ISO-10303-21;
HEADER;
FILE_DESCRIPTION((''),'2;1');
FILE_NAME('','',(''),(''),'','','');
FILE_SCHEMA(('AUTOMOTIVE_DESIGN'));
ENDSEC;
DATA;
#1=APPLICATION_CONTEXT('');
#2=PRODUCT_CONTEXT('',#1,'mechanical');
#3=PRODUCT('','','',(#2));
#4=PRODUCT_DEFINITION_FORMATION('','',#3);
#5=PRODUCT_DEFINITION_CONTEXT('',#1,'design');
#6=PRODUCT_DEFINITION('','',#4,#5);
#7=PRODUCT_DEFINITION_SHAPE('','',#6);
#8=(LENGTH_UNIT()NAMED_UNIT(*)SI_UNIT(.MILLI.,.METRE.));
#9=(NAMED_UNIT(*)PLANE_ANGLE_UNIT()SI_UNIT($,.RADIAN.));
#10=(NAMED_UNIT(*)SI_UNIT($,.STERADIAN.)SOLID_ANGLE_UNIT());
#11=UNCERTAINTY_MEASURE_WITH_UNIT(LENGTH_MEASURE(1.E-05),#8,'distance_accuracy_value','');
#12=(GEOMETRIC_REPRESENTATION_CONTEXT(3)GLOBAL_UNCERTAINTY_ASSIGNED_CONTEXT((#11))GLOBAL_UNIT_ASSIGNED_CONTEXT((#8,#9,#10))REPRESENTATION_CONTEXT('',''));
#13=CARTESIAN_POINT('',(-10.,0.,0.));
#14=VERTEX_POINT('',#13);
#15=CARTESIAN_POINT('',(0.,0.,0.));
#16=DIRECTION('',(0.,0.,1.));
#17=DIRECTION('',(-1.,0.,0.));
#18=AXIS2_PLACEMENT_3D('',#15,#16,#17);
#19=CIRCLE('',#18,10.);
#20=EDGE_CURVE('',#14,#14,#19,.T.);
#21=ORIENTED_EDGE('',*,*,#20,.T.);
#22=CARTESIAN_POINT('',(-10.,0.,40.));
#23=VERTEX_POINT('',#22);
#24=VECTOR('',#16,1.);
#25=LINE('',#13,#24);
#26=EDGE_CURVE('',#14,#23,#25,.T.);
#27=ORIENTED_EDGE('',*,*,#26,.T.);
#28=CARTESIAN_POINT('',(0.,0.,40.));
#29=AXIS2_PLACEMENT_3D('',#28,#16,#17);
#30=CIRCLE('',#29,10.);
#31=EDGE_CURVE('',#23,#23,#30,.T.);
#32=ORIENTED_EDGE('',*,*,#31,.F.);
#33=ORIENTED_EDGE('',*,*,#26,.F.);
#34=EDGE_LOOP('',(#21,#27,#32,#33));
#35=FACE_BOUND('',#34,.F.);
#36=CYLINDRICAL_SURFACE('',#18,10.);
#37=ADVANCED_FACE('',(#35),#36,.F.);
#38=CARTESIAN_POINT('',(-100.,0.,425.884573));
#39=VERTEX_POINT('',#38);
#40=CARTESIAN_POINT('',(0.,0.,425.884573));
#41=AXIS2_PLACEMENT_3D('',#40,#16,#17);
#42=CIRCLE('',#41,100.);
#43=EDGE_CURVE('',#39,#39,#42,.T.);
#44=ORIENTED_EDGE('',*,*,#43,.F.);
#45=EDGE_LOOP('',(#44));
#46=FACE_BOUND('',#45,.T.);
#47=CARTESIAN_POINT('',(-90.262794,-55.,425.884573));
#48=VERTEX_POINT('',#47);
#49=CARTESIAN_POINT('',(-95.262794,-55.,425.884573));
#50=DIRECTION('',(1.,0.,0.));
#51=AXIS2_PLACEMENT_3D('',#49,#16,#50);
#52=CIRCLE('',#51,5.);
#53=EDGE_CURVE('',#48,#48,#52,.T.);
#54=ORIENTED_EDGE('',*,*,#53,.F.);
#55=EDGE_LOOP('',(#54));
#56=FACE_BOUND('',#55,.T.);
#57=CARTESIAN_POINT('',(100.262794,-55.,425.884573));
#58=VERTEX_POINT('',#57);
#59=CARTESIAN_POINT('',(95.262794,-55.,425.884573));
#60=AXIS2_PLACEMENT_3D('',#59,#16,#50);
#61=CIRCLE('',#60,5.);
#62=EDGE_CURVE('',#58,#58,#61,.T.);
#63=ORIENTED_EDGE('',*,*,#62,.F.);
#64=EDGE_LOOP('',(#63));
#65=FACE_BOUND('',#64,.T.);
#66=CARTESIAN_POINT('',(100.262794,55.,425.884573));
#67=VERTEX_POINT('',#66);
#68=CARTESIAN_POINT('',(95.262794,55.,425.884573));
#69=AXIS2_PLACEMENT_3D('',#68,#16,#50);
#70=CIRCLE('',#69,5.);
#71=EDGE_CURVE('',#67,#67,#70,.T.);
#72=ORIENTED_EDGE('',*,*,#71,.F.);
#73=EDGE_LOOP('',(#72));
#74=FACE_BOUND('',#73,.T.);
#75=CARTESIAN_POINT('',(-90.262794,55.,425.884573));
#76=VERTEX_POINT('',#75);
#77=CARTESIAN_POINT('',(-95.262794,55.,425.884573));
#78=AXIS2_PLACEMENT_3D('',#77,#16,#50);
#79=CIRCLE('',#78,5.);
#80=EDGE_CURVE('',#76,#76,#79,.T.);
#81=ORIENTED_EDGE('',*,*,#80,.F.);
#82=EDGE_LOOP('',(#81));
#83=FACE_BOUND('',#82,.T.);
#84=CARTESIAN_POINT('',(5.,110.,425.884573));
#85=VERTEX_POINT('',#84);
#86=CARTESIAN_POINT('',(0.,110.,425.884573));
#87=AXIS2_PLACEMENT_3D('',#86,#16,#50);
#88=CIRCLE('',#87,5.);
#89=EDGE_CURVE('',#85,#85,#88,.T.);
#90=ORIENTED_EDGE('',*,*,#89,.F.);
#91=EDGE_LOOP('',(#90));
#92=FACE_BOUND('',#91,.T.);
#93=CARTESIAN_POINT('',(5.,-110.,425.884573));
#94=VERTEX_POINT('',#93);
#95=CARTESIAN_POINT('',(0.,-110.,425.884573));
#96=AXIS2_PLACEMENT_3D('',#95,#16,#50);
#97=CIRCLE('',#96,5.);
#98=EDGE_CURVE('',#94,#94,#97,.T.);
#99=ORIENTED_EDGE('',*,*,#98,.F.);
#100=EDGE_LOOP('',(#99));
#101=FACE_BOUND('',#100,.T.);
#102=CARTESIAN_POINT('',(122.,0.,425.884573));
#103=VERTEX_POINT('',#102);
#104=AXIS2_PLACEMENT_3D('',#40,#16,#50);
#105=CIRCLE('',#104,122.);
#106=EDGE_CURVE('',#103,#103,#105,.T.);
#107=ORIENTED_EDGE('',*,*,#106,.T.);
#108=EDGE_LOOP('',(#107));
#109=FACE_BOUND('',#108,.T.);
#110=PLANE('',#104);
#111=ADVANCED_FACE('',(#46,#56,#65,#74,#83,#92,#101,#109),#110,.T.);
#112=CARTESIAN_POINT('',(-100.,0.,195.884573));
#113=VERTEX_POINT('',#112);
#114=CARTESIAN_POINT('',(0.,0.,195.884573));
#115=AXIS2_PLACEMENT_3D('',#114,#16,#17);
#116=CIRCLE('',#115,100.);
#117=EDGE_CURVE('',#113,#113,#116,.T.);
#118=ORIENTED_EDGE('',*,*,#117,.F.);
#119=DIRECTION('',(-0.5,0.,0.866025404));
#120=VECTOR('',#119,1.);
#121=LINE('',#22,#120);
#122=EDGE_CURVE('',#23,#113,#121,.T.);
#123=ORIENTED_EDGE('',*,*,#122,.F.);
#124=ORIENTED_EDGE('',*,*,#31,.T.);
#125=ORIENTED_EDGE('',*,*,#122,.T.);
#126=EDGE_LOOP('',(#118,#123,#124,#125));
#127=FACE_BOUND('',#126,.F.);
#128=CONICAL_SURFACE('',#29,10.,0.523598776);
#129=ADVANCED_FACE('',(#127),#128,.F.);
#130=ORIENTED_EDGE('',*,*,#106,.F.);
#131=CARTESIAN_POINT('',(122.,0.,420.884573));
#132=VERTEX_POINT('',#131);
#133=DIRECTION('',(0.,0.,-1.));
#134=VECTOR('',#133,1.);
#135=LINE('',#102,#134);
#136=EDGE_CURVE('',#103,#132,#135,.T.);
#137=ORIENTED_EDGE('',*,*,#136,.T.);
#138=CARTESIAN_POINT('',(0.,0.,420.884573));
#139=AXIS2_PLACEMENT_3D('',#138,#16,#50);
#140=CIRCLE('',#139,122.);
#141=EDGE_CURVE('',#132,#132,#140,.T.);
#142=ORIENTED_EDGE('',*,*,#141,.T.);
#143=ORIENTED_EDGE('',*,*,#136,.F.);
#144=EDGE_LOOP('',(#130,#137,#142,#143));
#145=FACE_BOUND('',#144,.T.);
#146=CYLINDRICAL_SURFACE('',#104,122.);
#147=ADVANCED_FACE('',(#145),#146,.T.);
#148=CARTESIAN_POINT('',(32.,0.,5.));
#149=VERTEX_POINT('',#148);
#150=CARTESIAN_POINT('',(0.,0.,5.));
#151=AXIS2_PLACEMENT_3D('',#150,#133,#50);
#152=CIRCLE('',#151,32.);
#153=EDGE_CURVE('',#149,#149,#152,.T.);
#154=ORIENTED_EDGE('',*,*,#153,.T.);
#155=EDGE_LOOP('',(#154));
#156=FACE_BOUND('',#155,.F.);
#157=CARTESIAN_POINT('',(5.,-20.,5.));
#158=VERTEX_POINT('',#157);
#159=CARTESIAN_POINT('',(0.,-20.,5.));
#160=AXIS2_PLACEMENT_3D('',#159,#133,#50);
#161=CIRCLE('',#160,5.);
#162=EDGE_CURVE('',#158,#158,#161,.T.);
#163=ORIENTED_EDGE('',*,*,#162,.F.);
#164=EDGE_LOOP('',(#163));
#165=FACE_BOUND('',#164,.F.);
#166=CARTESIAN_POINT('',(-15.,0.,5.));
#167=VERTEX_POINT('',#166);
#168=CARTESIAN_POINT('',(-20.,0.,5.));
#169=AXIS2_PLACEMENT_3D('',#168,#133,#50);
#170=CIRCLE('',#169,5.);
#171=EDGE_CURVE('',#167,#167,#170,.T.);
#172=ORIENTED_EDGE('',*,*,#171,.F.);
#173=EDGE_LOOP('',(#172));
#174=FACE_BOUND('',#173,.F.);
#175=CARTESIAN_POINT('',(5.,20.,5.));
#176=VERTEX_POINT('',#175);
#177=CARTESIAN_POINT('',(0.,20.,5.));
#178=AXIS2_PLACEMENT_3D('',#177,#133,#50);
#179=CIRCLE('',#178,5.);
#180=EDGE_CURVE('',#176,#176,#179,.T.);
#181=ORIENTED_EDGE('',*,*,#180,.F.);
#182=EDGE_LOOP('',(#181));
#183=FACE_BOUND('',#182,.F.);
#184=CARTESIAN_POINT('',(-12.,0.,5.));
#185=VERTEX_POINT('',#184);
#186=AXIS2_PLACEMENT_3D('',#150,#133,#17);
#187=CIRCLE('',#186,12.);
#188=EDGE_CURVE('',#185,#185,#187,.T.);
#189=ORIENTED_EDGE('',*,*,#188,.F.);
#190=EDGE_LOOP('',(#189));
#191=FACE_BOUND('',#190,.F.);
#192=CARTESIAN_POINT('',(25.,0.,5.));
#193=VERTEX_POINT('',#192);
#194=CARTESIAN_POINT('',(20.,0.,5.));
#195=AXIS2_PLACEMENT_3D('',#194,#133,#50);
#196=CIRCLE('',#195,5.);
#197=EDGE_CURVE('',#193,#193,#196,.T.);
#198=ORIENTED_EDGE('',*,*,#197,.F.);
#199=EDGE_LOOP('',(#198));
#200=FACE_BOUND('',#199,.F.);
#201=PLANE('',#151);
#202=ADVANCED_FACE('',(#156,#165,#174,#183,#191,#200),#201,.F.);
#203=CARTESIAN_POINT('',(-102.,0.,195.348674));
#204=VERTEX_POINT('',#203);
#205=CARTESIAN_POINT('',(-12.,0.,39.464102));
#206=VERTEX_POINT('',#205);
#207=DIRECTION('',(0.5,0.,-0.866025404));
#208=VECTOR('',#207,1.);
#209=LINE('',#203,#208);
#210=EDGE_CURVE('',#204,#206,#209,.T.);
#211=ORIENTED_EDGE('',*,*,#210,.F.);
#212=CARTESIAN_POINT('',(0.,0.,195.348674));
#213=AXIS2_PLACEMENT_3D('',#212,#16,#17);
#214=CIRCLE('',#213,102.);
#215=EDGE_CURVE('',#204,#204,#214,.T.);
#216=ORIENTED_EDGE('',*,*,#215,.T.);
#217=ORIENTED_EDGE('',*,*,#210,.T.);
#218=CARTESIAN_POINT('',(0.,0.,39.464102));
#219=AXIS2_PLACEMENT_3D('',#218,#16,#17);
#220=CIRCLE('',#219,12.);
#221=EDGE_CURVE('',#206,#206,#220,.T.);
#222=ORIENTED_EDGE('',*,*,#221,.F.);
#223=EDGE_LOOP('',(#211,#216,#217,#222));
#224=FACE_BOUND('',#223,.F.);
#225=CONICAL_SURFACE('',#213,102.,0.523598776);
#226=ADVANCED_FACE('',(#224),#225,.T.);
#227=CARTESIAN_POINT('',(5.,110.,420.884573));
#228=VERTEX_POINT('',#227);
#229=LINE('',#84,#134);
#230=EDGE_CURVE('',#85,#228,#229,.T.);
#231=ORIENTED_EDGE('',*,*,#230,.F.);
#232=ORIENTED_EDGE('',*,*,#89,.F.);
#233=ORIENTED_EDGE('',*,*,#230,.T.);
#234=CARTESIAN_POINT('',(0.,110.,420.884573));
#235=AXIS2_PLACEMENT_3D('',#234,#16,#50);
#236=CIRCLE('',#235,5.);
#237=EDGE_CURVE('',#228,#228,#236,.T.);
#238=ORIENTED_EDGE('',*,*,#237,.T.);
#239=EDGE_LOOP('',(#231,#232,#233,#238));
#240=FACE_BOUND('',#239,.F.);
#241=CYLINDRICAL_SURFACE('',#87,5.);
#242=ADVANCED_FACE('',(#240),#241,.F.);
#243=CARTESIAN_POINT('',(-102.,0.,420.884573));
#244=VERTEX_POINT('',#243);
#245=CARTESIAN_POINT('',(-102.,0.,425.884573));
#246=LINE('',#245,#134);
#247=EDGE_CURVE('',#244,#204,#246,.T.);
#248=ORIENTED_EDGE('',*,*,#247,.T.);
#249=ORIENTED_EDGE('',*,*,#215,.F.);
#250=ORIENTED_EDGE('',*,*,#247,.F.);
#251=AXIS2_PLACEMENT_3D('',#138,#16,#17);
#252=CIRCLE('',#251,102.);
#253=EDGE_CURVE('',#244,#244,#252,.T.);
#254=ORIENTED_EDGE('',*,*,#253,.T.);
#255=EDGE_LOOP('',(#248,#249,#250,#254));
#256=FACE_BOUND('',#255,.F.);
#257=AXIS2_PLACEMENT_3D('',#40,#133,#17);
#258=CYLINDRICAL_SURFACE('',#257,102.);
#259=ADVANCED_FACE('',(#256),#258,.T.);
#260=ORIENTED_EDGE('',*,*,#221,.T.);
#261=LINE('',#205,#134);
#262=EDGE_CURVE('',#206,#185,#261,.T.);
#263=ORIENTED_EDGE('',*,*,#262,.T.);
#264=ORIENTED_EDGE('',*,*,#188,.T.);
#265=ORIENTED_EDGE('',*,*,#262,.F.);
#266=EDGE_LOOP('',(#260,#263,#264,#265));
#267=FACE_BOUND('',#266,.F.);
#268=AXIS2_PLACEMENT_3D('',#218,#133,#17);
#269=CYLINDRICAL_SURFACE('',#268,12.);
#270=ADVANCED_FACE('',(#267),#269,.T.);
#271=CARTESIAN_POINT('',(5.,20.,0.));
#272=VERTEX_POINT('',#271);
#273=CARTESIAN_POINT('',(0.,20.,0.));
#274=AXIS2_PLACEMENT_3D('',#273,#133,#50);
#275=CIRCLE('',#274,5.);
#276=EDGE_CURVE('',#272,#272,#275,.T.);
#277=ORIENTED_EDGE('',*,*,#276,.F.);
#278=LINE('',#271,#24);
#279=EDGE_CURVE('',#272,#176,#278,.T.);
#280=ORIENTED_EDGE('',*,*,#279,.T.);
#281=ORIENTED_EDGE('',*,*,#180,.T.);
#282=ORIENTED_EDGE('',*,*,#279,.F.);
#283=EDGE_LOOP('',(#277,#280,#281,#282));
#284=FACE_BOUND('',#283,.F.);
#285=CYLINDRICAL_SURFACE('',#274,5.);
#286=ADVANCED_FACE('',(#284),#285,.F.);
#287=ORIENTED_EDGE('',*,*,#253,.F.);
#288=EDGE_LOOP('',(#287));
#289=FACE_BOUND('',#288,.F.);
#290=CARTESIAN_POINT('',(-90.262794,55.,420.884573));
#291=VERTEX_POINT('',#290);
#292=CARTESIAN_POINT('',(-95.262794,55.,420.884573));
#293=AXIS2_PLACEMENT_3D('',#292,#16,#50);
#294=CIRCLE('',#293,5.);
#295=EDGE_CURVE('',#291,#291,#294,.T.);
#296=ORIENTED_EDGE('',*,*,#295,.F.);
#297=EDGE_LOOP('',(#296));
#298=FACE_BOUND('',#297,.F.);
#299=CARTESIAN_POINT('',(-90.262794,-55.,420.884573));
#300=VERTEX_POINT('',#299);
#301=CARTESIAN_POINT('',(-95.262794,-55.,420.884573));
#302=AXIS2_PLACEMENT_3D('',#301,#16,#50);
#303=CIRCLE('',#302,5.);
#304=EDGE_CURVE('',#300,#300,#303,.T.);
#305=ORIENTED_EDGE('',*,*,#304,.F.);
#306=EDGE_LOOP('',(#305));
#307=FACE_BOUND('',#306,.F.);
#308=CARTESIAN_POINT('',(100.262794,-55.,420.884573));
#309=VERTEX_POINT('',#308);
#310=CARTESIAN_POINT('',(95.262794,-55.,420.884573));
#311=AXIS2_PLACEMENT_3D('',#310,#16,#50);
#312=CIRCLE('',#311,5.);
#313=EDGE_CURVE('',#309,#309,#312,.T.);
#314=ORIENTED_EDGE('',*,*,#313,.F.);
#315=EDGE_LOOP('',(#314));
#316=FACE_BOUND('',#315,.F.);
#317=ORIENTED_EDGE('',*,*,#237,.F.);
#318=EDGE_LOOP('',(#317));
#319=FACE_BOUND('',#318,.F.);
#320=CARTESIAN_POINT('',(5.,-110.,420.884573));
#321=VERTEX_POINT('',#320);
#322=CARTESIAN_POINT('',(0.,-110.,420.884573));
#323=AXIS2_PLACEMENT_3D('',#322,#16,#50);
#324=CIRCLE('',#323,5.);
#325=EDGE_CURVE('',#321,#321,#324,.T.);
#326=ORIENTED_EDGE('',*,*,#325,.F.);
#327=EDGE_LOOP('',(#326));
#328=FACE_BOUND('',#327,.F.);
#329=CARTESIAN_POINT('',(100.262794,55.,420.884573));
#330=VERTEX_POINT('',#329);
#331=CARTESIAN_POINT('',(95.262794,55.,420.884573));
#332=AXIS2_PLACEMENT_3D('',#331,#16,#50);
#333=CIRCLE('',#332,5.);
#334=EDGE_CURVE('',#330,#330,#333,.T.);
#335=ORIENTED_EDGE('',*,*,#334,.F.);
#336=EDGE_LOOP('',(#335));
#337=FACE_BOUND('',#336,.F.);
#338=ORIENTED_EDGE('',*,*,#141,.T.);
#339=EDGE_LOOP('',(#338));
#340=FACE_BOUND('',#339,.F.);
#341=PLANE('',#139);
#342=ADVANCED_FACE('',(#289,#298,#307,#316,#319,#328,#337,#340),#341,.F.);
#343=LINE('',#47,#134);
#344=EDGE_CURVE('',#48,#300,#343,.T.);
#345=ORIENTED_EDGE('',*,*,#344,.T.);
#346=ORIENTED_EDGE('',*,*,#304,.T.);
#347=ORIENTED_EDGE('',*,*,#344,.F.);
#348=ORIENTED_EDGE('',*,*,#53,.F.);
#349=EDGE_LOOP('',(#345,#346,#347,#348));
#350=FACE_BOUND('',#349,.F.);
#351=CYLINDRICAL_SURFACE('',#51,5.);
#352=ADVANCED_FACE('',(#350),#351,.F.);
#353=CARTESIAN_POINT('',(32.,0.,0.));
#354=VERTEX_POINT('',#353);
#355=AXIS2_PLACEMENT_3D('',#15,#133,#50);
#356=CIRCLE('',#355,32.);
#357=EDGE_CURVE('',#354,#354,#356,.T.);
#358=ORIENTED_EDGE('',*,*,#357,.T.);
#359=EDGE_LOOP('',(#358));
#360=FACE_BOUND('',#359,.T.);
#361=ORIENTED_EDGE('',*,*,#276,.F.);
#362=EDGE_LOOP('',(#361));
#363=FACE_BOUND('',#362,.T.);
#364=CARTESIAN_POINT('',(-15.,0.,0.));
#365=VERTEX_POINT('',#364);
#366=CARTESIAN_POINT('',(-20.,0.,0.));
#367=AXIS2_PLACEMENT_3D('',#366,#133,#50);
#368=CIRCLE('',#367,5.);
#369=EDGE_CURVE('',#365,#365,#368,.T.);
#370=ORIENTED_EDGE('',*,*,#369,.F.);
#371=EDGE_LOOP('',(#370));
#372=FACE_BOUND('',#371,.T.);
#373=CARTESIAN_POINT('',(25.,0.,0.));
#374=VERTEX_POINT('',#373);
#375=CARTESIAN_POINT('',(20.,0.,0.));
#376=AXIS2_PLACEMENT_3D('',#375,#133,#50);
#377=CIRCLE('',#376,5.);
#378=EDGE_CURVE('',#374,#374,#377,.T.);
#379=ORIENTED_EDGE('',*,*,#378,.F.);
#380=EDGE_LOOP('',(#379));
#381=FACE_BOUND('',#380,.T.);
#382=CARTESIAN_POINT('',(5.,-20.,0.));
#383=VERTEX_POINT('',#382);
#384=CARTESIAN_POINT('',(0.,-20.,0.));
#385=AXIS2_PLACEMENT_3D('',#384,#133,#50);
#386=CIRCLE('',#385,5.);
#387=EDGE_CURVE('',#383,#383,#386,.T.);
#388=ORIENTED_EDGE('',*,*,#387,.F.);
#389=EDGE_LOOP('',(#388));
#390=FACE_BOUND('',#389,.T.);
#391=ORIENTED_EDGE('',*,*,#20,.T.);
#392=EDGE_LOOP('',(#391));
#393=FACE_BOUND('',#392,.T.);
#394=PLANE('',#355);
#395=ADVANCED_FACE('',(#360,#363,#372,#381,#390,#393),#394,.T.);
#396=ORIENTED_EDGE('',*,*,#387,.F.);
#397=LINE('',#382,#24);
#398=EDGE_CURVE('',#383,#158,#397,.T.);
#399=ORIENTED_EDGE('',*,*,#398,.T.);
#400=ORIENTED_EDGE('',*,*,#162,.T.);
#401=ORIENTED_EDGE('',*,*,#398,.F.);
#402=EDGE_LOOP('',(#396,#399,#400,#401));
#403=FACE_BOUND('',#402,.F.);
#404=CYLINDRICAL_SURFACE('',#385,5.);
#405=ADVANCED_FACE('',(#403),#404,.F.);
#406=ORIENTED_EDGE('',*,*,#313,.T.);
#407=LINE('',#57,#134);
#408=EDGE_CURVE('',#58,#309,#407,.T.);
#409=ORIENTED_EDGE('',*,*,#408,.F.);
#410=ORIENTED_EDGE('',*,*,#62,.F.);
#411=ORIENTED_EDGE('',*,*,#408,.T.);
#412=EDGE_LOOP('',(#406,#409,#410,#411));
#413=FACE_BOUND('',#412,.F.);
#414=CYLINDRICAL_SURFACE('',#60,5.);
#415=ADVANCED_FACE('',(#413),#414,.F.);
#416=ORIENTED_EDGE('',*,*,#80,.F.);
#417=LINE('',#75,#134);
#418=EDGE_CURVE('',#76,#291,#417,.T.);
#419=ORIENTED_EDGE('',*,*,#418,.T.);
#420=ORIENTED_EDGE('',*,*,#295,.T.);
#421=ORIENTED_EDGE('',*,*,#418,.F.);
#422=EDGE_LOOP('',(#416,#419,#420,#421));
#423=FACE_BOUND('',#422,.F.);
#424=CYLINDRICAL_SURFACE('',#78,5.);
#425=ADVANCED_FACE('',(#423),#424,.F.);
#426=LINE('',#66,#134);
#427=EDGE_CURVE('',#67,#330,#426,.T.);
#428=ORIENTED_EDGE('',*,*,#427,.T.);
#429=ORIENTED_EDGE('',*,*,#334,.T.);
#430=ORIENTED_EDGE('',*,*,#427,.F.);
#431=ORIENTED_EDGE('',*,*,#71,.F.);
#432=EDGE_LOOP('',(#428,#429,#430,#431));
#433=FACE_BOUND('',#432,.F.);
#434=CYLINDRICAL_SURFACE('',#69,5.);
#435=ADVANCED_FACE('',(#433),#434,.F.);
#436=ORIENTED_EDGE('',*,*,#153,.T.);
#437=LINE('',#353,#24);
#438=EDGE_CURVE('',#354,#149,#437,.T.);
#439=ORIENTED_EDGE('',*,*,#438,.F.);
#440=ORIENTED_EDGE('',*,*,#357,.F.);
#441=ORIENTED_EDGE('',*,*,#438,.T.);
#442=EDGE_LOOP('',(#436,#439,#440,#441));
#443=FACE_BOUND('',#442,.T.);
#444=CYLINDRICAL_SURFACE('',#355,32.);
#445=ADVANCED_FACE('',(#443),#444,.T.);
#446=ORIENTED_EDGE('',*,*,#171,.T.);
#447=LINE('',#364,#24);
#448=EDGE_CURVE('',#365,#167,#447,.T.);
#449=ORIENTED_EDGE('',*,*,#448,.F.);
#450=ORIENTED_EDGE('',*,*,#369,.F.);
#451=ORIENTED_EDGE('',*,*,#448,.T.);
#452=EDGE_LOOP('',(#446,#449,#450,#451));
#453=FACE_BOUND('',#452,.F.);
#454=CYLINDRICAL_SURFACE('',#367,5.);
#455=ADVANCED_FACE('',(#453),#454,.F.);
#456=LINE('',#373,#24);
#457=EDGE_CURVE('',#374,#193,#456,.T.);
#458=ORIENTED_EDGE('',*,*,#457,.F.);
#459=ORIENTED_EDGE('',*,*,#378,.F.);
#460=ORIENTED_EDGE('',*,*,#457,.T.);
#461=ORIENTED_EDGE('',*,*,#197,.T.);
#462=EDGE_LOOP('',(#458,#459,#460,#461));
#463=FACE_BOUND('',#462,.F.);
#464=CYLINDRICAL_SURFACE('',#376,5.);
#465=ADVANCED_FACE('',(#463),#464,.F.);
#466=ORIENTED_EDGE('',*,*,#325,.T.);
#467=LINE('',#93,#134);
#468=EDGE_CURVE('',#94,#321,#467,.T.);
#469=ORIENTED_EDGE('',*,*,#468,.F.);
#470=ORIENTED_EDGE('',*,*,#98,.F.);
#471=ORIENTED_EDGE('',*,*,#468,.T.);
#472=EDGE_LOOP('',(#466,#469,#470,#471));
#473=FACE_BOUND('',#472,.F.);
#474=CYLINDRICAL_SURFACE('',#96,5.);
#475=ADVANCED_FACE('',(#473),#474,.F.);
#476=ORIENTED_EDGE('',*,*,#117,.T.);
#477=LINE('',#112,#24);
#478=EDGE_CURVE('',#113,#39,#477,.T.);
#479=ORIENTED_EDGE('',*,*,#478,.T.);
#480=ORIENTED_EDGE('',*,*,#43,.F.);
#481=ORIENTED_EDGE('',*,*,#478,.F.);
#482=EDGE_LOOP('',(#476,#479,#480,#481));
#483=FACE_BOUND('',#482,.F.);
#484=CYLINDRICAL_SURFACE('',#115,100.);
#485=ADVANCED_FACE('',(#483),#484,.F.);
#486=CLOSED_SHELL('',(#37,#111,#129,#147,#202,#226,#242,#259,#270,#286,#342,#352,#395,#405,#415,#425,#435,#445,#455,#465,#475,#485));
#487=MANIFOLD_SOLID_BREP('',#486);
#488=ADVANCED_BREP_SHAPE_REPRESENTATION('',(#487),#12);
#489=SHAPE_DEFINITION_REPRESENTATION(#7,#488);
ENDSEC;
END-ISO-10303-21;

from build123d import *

# Parameters (mm, degrees)
F2_R     = 122
F2_R_2   = 102
F3_DEPTH = 5
F4_R     = 32
F4_R_2   = 12
F5_DEPTH = 5
F6_R     = 5
F7_DEPTH = 425.8855726812
F8_R     = 5
F9_DEPTH = 5


with BuildPart() as f1:
    # F0 (on Front) → F1 (revolve)
    with BuildSketch(Plane.XZ):
        Polygon((-100, 195.8845726812), (-100, 425.8845726812), (-102, 425.8845726812), (-102, 195.3486742963), (-12, 39.4641016151), (-12, 0), (-10, 0), (-10, 40), align=None)
    revolve(axis=Axis((0, 0, 212.9422863406), (0, 0, 1)))

    # F2 (on face) → F3 (join)
    with BuildSketch(Plane.XY.offset(425.8845726812)):
        Circle(F2_R)
        Circle(F2_R_2, mode=Mode.SUBTRACT)
    extrude(amount=-F3_DEPTH)

    # F4 (on face) → F5 (join)
    with BuildSketch(Plane(origin=(0, 0, 0), x_dir=(1, 0, 0), z_dir=(0, 0, -1))):
        Circle(F4_R)
        Circle(F4_R_2, mode=Mode.SUBTRACT)
    extrude(amount=-F5_DEPTH)

    # F6 (on face) → F7 (cut, through all)
    with BuildSketch(Plane.XY.offset(425.8845726812)):
        with Locations((0, 110)):
            Circle(F6_R)
        with Locations((-95.2627944163, 55)):
            Circle(F6_R)
        with Locations((-95.2627944163, -55)):
            Circle(F6_R)
        with Locations((0, -110)):
            Circle(F6_R)
        with Locations((95.2627944163, -55)):
            Circle(F6_R)
        with Locations((95.2627944163, 55)):
            Circle(F6_R)
    extrude(amount=-F7_DEPTH, mode=Mode.SUBTRACT)

    # F8 (on face) → F9 (cut, through all)
    with BuildSketch(Plane(origin=(0, 0, 0), x_dir=(1, 0, 0), z_dir=(0, 0, -1))):
        with Locations((0, 20)):
            Circle(F8_R)
        with Locations((-20, 0)):
            Circle(F8_R)
        with Locations((0, -20)):
            Circle(F8_R)
        with Locations((20, 0)):
            Circle(F8_R)
    extrude(amount=-F9_DEPTH, mode=Mode.SUBTRACT)


solid = f1.part
